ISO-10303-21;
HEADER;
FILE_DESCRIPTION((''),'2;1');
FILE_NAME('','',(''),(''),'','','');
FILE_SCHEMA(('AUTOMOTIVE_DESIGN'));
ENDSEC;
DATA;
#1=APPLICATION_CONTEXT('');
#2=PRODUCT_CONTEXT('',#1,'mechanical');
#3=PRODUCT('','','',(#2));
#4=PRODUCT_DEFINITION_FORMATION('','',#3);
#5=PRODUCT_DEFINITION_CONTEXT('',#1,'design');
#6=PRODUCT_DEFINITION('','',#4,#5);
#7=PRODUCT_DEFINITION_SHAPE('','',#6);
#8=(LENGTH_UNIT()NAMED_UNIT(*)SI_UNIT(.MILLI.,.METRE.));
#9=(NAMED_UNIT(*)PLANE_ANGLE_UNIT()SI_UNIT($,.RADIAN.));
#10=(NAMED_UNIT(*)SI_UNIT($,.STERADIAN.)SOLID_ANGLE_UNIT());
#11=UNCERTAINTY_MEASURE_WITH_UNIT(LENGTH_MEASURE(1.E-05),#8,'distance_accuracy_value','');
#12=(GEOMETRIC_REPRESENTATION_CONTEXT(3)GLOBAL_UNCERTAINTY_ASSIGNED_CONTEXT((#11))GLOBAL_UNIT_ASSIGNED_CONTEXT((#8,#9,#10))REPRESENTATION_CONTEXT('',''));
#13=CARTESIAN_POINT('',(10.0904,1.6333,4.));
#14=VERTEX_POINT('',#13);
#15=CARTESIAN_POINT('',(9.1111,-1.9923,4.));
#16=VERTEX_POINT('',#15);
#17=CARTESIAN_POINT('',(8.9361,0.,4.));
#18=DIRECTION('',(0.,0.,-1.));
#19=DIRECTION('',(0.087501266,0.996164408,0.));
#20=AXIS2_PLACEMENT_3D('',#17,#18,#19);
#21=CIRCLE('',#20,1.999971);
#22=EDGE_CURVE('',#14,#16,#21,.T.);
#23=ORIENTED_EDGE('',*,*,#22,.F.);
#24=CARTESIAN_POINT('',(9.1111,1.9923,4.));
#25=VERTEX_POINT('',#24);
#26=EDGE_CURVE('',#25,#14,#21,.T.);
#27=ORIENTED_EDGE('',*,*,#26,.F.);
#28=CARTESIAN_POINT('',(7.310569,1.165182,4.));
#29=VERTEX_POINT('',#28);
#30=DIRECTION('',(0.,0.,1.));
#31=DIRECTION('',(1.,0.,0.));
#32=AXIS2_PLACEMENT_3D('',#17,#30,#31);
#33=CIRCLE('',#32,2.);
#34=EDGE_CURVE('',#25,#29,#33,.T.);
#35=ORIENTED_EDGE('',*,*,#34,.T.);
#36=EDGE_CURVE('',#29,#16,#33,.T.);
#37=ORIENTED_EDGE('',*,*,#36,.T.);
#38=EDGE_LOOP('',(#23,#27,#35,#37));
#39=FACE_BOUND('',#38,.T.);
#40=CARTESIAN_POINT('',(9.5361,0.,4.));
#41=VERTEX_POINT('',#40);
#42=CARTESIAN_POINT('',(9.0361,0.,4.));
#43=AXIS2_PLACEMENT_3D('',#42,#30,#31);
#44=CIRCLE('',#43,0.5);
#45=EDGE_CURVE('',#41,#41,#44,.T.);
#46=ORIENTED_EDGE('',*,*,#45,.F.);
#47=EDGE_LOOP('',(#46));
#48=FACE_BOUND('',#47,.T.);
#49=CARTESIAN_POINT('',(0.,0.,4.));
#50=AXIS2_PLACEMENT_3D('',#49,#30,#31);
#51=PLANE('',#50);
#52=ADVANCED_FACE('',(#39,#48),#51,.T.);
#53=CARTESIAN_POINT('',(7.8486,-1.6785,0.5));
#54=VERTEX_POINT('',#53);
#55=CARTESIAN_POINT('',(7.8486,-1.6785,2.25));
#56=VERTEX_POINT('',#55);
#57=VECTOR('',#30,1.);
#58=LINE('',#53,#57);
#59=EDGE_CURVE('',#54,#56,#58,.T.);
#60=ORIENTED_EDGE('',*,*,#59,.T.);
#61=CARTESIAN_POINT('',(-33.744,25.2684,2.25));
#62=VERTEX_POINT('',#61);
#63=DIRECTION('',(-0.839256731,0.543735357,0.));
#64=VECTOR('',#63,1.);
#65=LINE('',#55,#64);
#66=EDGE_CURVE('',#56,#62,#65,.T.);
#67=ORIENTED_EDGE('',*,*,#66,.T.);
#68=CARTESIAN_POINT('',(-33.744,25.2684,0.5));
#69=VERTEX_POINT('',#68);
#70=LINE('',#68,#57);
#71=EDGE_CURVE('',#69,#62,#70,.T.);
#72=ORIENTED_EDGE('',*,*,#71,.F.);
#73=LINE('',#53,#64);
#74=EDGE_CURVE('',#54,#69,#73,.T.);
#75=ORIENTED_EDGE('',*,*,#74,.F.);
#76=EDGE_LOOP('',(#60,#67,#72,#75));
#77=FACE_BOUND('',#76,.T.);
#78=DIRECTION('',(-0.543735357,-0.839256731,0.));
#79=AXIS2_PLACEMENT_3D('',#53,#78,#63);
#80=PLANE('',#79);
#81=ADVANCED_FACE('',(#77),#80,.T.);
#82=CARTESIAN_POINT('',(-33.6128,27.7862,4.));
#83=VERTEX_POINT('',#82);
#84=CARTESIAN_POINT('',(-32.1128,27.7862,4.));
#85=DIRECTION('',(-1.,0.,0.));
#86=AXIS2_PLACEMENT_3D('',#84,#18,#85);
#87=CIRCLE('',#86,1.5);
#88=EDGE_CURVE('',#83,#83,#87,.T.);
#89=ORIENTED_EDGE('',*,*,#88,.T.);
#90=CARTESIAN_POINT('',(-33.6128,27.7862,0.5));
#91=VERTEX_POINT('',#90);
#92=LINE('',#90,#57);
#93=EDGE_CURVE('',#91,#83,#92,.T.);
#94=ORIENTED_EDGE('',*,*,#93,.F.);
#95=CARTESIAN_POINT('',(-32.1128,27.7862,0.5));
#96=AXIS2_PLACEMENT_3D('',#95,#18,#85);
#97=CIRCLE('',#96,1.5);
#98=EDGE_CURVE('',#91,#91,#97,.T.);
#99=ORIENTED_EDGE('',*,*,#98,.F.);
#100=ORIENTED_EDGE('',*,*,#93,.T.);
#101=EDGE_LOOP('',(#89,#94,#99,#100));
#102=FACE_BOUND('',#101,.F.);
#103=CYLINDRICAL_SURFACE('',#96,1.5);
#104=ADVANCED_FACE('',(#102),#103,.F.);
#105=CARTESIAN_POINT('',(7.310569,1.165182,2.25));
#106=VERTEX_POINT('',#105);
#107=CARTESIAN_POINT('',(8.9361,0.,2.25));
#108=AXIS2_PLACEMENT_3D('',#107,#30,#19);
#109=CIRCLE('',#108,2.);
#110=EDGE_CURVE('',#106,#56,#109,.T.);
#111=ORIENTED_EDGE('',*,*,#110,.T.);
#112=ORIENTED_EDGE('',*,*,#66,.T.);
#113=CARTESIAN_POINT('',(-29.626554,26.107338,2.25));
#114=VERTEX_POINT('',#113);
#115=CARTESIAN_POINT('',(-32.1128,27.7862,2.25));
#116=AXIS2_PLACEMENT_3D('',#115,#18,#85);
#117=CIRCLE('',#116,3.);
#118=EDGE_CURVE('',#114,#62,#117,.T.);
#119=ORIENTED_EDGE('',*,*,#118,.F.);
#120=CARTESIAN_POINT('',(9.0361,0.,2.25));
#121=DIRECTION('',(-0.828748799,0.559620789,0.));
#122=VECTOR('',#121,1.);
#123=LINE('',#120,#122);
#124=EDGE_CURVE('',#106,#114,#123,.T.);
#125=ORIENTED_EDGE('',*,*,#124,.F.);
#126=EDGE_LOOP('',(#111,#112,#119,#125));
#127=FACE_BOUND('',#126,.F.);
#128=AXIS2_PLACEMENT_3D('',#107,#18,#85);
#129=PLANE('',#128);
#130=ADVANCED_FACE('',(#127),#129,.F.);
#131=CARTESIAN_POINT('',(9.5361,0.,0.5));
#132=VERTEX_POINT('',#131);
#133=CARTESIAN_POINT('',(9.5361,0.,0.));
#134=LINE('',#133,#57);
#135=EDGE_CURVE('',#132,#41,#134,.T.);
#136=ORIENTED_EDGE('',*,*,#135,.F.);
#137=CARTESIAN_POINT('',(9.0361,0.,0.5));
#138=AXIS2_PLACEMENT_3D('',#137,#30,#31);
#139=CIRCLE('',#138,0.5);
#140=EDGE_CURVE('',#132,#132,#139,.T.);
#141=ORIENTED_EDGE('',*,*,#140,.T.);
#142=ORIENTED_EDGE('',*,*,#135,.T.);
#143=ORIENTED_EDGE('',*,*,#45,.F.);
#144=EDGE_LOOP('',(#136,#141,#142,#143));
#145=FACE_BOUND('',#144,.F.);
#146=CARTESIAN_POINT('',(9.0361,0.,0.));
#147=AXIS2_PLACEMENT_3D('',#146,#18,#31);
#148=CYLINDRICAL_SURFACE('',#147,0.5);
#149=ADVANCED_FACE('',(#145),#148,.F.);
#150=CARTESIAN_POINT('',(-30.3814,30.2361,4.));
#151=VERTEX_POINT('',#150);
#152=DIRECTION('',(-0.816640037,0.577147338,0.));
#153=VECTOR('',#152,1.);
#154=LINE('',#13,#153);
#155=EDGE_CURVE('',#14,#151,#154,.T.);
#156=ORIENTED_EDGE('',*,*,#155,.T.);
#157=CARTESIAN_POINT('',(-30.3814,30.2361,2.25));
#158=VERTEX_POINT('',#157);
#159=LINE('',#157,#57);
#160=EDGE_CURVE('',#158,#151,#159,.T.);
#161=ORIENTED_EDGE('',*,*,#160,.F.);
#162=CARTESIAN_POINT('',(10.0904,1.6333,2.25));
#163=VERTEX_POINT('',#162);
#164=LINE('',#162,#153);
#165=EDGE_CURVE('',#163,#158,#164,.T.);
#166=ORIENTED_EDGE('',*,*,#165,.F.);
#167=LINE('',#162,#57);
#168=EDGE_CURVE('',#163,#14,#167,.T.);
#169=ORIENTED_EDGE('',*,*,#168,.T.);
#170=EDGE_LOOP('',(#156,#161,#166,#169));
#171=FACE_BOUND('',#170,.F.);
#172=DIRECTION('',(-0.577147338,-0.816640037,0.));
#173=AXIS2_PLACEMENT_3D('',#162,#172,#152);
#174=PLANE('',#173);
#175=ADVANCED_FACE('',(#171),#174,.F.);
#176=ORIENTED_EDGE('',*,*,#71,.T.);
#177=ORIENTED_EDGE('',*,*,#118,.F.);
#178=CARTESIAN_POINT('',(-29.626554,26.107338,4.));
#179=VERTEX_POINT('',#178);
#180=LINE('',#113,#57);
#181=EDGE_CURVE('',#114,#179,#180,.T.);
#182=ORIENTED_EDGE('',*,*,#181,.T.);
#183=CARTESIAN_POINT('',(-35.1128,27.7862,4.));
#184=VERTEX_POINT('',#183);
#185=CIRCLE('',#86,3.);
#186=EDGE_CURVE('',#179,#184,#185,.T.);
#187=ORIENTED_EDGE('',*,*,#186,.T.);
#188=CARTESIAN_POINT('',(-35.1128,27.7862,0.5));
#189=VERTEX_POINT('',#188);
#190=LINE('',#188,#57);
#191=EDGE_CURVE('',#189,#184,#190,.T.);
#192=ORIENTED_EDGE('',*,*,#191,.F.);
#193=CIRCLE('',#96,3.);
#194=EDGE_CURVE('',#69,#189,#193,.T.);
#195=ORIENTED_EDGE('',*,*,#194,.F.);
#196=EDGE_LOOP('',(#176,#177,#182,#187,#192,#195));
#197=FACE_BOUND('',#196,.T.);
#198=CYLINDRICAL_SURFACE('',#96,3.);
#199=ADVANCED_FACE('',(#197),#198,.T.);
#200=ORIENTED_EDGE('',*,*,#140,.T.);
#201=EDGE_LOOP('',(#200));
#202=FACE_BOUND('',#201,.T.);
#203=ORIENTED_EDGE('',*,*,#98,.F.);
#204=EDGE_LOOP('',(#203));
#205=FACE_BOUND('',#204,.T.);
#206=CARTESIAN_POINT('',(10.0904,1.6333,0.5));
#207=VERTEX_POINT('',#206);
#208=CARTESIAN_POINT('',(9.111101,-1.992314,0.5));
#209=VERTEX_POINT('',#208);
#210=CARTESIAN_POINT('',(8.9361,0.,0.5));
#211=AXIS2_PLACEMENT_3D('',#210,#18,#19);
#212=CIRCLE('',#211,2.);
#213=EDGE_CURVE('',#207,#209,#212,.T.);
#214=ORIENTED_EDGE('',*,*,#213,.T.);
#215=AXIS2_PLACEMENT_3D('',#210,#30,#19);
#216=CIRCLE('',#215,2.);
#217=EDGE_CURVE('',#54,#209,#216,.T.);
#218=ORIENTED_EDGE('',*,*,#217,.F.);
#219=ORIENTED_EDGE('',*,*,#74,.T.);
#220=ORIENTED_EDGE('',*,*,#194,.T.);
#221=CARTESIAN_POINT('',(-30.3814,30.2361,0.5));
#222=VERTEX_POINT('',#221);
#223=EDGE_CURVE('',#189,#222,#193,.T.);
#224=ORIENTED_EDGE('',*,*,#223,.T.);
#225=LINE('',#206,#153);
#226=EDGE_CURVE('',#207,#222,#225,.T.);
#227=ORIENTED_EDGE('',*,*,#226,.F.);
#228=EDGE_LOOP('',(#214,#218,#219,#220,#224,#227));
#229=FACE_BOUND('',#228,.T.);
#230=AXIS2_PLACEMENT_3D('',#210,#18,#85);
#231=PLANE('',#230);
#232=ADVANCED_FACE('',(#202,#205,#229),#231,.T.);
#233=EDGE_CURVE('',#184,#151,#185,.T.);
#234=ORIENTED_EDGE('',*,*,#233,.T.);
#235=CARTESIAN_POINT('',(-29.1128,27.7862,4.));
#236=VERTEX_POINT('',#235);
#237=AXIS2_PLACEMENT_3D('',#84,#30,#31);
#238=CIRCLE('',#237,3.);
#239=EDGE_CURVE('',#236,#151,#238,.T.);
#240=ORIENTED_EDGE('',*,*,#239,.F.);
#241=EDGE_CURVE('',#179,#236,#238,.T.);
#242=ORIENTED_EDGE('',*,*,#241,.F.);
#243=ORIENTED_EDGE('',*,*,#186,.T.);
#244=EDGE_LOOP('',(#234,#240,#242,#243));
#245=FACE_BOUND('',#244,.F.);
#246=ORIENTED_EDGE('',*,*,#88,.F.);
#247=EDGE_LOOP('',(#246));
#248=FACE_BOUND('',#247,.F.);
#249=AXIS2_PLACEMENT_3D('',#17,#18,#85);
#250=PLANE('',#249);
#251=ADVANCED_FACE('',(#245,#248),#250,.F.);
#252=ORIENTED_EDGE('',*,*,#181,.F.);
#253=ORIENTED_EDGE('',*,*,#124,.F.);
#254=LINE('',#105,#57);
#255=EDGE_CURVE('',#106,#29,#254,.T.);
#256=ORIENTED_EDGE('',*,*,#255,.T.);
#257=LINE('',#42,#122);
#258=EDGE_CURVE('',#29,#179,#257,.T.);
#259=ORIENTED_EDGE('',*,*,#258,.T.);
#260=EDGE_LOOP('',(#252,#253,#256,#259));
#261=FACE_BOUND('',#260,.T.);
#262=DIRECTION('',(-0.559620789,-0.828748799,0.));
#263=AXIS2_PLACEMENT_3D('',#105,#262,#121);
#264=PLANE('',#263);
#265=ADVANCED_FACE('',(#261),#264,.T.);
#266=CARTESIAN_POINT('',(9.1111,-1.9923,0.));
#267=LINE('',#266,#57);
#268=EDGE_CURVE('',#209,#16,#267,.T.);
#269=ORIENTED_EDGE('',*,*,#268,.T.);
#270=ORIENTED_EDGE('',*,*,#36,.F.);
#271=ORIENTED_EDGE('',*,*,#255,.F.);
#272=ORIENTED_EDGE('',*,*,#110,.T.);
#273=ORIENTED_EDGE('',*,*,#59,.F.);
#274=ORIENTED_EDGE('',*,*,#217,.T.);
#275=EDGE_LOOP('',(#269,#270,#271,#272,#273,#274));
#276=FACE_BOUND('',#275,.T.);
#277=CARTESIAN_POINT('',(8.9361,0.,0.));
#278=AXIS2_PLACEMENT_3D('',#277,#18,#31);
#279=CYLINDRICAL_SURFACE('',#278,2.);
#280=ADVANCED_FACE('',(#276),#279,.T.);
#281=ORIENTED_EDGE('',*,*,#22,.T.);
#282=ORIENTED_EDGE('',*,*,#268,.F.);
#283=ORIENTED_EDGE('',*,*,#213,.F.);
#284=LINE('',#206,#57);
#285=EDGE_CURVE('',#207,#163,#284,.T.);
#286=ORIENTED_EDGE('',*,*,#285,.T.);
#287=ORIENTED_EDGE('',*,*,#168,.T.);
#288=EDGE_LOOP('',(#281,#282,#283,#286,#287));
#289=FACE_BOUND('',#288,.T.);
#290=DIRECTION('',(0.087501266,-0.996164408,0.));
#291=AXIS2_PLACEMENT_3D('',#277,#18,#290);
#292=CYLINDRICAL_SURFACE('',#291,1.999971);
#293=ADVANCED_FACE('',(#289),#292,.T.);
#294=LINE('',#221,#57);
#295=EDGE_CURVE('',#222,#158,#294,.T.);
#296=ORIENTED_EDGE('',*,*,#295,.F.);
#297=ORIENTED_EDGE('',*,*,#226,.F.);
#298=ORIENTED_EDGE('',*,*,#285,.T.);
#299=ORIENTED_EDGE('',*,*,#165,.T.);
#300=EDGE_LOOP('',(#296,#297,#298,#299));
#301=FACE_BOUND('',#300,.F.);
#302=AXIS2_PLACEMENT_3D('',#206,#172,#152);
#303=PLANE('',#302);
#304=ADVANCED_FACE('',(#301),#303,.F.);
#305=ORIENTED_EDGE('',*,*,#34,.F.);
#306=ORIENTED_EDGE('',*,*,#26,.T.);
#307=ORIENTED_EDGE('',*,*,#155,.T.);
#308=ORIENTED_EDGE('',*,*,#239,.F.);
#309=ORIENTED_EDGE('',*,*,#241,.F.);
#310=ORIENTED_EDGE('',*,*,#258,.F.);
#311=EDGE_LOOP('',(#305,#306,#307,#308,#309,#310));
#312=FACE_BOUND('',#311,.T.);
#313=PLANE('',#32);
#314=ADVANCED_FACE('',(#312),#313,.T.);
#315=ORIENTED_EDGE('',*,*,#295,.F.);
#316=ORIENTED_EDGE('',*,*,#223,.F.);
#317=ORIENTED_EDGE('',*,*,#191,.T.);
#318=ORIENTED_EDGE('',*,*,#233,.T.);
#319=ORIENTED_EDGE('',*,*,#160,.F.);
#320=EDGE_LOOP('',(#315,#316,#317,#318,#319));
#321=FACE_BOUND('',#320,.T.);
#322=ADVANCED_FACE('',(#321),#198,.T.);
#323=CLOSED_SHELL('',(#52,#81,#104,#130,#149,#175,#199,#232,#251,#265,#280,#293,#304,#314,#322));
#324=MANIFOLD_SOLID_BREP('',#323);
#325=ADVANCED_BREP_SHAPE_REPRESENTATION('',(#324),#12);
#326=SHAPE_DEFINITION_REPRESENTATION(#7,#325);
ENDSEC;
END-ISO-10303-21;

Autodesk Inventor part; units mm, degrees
ref_plane "YZ Plane" through (0, 0, 0) normal (1, 0, 0) x (0, 1, 0)
ref_plane "XZ Plane" through (0, 0, 0) normal (0, 1, 0) x (-1, 0, 0)
ref_plane "XY Plane" through (0, 0, 0) normal (0, 0, 1) x (1, 0, 0)
sketch "Sketch1" plane through (0, 0, 0) normal (0, 0, 1) x (1, 0, 0)
  circle A0 centre (9.0361, 0) radius 0.5 projected
  arc A1 (9.1111, -1.9923) -> (9.1111, 1.9923) centre (8.9361, 0) ccw projected
  circle A2 centre (8.9361, 0) radius 2
  point P0 (0, 0)
  point P1 (9.1111, 1.9923)
  point P2 (9.1111, -1.9923)
extrude "Extrusion1" add sketch "Sketch1" along normal blind 4
sketch "Sketch2" plane through (8.9361, 0, 0) normal (0, 0, -1) x (-1, 0, 0)
  circle A0 centre (0, 0) radius 2 projected
  circle A1 centre (-0.1, 0) radius 0.5 projected
  point P0 (8.9361, 0)
extrude "Extrusion2" cut sketch "Sketch2" against normal blind 0.5
sketch "Sketch3" plane through (8.9361, 0, 0.5) normal (0, 0, -1) x (-1, 0, 0)
  circle A0 centre (34.6774, 22.9773) radius 1.5 projected
  arc A1 (36.9746, 24.9067) -> (34.2673, 20.0054) centre (34.6774, 22.9773) ccw projected
  circle A2 centre (34.6774, 22.9773) radius 3
  circle A3 centre (41.0489, 27.7862) radius 1.5 projected
  circle A4 centre (41.0489, 27.7862) radius 3
  point P0 (8.9361, 0)
  point P1 (34.2673, 20.0054)
  dimension "d11" = 3
  dimension "d12" = 6
extrude "Extrusion3" add sketch "Sketch3" against normal up to surface (3.5 mm away) contours A4
sketch "Sketch6" plane through (8.9361, 0, 0.5) normal (0, 0, -1) x (-1, 0, 0)
  circle A0 centre (41.0489, 27.7862) radius 3 projected
  circle A1 centre (41.0489, 27.7862) radius 1.5 projected
  circle A2 centre (0, 0) radius 2 projected
  circle A3 centre (-0.1, 0) radius 0.5 projected
  line L0 (-1.1543, 1.6333) -> (39.3175, 30.2361)
  line L1 (1.0875, -1.6785) -> (42.6801, 25.2684)
  point P0 (8.9361, 0)
extrude "Extrusion6" add sketch "Sketch6" against normal blind 1.75 contours A0 L1 A2 L0
sketch "Sketch7" plane through (8.9361, 0, 2.25) normal (0, 0, 1) x (1, 0, 0)
  line L0 (1.1543, 1.6333) -> (-39.3175, 30.2361) projected
  circle A0 centre (-41.0489, 27.7862) radius 3 projected
  circle A1 centre (0, 0) radius 2 projected
  circle A2 centre (0.1, 0) radius 0.5 projected
  line L1 (0.1, 0) -> (-41.0489, 27.7862)
  point P0 (-8.9361, 0)
  point P1 (-38.5627, 26.1073)
  point P2 (-1.6255, 1.1652)
extrude "Extrusion7" add sketch "Sketch7" along normal up to surface (1.75 mm away) contours A1 L1 A0 L0
properties part number "ServoShaft_3DPrint"
